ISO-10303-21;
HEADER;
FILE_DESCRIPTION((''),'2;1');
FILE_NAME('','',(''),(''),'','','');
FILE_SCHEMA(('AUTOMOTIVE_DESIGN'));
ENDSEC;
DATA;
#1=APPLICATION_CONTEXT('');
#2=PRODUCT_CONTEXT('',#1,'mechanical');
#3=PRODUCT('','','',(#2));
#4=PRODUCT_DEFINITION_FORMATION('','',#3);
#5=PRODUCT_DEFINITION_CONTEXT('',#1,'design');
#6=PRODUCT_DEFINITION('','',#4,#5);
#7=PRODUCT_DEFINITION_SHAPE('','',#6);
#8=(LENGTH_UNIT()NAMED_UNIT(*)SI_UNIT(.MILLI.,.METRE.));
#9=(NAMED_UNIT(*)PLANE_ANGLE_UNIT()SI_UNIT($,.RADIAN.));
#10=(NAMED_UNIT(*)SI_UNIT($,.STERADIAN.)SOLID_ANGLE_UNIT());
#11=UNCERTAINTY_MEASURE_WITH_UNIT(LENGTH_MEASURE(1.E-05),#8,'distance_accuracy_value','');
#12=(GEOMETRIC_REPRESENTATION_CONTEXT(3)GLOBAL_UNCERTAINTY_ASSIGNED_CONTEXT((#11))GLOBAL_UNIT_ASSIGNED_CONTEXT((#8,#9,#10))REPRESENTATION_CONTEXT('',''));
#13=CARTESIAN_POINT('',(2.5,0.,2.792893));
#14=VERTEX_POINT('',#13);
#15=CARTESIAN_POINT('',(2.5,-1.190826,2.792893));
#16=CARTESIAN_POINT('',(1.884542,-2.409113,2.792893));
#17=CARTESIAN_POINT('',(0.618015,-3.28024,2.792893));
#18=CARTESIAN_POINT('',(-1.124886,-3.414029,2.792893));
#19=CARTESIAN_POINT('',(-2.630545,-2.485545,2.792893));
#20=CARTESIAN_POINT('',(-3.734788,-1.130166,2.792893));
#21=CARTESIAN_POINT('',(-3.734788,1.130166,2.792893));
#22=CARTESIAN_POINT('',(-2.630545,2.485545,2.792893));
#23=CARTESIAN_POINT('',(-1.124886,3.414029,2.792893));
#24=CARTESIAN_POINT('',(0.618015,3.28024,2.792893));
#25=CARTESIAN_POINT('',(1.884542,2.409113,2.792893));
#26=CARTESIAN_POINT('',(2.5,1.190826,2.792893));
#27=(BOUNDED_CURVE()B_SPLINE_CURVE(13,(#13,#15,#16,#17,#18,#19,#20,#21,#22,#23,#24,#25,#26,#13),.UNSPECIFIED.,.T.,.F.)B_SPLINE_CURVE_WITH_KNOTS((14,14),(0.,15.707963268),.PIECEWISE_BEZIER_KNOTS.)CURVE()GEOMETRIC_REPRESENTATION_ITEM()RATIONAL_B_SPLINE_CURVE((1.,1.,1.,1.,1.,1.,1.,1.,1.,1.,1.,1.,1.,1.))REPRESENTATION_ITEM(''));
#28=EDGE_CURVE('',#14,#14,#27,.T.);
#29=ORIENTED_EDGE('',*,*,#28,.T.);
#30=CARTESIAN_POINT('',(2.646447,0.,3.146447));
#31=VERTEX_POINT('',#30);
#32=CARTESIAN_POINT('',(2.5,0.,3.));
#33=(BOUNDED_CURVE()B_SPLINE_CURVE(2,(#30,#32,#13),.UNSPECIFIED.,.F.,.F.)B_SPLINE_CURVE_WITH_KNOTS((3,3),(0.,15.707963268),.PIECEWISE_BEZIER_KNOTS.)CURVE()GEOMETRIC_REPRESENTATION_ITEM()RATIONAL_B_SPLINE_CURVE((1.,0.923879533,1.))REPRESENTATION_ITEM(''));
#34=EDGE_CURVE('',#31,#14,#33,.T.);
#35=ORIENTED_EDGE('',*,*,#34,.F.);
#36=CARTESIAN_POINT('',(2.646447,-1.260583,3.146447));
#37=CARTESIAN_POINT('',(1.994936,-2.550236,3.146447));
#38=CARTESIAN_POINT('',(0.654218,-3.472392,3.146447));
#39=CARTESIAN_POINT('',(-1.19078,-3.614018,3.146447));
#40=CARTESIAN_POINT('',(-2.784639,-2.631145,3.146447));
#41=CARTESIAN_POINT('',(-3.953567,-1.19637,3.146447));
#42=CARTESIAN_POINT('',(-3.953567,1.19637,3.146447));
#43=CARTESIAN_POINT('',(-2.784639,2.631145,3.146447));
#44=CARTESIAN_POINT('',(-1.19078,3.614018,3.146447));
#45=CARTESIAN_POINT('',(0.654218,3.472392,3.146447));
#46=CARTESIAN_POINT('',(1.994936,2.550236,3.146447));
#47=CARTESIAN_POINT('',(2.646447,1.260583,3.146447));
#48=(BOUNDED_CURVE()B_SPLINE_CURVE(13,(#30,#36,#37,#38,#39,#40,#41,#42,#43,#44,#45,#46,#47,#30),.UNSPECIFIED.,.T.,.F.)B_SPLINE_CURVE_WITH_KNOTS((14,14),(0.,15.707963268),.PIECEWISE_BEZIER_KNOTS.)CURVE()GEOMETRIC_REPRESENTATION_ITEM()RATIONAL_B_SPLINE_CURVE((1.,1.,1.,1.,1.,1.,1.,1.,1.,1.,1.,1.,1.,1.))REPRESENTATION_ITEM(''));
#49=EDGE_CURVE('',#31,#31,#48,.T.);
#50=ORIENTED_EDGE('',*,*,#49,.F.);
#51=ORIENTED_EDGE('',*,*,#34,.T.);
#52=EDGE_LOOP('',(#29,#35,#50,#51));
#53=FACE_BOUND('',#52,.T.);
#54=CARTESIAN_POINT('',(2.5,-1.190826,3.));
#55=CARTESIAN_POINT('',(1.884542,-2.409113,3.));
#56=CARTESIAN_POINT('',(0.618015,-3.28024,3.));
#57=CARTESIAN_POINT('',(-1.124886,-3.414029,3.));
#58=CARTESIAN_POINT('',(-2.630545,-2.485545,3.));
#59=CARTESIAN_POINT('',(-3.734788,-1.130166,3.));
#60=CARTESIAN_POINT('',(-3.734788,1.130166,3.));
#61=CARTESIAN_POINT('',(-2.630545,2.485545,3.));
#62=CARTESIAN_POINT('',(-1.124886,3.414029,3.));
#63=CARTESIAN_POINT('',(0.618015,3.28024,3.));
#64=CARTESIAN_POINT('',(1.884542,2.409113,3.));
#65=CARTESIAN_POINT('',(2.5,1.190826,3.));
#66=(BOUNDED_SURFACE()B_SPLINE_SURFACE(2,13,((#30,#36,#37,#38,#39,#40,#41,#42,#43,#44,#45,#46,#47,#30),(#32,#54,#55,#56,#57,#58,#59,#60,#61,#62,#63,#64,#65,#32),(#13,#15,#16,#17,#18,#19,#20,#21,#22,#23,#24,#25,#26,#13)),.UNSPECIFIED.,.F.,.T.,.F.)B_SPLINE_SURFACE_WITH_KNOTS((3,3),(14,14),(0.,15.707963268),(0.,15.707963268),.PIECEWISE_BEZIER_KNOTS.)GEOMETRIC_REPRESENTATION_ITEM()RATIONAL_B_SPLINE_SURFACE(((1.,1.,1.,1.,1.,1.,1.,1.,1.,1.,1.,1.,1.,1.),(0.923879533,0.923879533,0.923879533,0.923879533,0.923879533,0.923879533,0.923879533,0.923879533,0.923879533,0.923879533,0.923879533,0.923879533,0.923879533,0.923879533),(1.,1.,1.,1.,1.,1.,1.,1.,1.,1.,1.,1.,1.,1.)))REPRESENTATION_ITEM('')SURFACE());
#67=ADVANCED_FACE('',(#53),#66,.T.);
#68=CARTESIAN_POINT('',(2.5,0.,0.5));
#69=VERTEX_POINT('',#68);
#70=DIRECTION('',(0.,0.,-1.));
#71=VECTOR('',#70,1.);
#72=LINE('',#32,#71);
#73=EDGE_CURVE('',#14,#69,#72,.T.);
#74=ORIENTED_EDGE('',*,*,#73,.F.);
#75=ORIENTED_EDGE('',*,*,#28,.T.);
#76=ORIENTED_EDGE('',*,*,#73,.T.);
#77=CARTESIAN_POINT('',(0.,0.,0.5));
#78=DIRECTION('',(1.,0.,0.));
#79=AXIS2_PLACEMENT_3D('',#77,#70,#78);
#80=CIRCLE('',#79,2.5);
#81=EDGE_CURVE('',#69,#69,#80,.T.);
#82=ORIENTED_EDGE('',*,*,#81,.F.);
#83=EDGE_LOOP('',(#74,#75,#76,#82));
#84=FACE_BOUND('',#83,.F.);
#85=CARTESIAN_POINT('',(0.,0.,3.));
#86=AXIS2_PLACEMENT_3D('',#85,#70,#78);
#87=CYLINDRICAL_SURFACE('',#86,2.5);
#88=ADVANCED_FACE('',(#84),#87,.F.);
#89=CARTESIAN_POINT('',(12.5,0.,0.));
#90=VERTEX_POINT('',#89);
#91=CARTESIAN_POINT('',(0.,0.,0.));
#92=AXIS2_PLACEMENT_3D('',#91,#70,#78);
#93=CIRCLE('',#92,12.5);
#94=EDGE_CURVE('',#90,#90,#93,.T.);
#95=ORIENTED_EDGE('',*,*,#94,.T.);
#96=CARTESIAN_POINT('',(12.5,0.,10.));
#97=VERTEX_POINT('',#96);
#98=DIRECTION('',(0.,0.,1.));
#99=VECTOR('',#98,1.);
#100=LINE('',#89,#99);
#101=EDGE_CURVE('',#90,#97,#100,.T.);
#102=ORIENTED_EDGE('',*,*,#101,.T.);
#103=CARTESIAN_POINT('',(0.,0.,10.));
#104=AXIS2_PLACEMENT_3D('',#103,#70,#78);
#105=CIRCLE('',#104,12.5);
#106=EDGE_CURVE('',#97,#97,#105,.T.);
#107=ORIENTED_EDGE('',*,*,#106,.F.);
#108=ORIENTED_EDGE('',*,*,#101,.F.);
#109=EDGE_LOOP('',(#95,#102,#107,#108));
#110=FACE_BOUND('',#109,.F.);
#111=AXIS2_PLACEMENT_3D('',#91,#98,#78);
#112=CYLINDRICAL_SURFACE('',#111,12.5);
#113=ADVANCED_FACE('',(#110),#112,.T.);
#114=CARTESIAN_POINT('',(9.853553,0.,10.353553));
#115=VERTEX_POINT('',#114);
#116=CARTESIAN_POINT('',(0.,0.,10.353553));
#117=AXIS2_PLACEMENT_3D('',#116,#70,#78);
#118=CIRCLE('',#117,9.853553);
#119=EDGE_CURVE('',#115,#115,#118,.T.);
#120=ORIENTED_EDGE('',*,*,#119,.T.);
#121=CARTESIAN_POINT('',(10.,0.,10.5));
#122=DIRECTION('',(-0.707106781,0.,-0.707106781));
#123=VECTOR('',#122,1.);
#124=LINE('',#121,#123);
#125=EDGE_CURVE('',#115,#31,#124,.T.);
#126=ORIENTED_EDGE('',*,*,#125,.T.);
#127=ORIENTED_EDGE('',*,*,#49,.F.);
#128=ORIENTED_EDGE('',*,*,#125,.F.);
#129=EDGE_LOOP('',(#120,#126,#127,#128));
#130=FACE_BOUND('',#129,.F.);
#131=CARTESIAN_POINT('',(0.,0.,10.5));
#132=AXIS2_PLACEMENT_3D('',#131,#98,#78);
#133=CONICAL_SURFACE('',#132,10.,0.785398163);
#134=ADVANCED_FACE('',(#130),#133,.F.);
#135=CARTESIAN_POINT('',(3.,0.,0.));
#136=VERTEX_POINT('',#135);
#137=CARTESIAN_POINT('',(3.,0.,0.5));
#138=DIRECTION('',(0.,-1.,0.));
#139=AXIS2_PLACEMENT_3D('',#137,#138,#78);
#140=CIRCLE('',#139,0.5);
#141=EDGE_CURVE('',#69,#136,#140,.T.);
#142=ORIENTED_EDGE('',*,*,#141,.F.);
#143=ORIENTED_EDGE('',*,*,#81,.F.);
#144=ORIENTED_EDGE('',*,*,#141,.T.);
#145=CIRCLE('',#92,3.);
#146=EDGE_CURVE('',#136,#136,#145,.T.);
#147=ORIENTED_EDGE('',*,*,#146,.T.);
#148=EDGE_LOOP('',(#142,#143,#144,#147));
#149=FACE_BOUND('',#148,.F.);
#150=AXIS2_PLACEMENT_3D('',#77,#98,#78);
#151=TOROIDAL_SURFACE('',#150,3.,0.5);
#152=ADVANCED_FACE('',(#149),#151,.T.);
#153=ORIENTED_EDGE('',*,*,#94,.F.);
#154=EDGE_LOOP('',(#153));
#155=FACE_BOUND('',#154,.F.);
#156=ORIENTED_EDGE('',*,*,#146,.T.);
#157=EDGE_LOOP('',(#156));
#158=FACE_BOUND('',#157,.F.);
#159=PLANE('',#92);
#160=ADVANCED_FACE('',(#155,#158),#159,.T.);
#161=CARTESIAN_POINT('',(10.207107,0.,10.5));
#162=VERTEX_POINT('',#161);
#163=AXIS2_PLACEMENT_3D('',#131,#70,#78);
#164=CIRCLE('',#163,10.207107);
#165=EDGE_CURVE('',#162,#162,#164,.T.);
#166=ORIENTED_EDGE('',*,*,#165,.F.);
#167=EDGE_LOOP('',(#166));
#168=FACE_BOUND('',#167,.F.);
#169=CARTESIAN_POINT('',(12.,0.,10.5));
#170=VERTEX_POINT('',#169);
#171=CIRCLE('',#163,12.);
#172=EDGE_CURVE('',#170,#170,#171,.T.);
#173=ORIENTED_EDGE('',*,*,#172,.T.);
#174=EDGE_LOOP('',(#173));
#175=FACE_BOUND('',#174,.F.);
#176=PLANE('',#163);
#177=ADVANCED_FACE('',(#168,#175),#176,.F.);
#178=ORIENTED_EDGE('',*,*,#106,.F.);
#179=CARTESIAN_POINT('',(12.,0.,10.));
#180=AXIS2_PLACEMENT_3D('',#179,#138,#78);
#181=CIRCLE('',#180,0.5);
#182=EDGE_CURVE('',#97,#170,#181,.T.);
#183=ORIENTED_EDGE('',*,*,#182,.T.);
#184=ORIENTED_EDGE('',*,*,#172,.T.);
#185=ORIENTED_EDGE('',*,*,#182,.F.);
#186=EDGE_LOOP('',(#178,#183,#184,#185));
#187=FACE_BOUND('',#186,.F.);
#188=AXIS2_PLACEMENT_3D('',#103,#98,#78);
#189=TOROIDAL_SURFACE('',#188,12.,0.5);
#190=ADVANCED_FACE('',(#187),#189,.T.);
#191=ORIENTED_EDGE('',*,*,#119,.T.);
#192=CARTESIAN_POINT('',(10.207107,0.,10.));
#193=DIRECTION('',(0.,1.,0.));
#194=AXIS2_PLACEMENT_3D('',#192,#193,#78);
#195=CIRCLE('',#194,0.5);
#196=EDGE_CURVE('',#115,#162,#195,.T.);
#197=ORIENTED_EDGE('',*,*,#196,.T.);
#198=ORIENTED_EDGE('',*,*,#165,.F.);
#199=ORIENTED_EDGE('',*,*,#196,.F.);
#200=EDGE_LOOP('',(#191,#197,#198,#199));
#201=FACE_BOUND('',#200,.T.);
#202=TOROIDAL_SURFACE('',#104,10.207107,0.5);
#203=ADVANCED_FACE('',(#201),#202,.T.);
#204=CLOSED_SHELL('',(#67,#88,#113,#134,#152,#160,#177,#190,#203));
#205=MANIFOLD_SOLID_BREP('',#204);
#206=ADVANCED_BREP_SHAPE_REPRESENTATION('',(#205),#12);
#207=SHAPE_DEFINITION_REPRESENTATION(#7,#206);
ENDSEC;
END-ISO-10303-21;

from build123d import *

# Parameters (mm, degrees)
F2_R = 0.5


with BuildPart() as f1:
    # F0 (on Front) → F1 (revolve)
    with BuildSketch(Plane.XZ):
        Polygon((10, 10.5), (2.5, 3), (2.5, 0), (12.5, 0), (12.5, 10.5), align=None)
    revolve(axis=Axis((0, 0, 15.3351295739), (0, 0, -1)))

    # F2
    f2_edges = [f1.edges().sort_by_distance(p)[0] for p in [
        (-12.5, 0, 10.5),
        (-10, 0, 10.5),
        (-2.5, 0, 3),
        (-2.5, 0, 0),
    ]]
    fillet(f2_edges, radius=F2_R)


solid = f1.part
